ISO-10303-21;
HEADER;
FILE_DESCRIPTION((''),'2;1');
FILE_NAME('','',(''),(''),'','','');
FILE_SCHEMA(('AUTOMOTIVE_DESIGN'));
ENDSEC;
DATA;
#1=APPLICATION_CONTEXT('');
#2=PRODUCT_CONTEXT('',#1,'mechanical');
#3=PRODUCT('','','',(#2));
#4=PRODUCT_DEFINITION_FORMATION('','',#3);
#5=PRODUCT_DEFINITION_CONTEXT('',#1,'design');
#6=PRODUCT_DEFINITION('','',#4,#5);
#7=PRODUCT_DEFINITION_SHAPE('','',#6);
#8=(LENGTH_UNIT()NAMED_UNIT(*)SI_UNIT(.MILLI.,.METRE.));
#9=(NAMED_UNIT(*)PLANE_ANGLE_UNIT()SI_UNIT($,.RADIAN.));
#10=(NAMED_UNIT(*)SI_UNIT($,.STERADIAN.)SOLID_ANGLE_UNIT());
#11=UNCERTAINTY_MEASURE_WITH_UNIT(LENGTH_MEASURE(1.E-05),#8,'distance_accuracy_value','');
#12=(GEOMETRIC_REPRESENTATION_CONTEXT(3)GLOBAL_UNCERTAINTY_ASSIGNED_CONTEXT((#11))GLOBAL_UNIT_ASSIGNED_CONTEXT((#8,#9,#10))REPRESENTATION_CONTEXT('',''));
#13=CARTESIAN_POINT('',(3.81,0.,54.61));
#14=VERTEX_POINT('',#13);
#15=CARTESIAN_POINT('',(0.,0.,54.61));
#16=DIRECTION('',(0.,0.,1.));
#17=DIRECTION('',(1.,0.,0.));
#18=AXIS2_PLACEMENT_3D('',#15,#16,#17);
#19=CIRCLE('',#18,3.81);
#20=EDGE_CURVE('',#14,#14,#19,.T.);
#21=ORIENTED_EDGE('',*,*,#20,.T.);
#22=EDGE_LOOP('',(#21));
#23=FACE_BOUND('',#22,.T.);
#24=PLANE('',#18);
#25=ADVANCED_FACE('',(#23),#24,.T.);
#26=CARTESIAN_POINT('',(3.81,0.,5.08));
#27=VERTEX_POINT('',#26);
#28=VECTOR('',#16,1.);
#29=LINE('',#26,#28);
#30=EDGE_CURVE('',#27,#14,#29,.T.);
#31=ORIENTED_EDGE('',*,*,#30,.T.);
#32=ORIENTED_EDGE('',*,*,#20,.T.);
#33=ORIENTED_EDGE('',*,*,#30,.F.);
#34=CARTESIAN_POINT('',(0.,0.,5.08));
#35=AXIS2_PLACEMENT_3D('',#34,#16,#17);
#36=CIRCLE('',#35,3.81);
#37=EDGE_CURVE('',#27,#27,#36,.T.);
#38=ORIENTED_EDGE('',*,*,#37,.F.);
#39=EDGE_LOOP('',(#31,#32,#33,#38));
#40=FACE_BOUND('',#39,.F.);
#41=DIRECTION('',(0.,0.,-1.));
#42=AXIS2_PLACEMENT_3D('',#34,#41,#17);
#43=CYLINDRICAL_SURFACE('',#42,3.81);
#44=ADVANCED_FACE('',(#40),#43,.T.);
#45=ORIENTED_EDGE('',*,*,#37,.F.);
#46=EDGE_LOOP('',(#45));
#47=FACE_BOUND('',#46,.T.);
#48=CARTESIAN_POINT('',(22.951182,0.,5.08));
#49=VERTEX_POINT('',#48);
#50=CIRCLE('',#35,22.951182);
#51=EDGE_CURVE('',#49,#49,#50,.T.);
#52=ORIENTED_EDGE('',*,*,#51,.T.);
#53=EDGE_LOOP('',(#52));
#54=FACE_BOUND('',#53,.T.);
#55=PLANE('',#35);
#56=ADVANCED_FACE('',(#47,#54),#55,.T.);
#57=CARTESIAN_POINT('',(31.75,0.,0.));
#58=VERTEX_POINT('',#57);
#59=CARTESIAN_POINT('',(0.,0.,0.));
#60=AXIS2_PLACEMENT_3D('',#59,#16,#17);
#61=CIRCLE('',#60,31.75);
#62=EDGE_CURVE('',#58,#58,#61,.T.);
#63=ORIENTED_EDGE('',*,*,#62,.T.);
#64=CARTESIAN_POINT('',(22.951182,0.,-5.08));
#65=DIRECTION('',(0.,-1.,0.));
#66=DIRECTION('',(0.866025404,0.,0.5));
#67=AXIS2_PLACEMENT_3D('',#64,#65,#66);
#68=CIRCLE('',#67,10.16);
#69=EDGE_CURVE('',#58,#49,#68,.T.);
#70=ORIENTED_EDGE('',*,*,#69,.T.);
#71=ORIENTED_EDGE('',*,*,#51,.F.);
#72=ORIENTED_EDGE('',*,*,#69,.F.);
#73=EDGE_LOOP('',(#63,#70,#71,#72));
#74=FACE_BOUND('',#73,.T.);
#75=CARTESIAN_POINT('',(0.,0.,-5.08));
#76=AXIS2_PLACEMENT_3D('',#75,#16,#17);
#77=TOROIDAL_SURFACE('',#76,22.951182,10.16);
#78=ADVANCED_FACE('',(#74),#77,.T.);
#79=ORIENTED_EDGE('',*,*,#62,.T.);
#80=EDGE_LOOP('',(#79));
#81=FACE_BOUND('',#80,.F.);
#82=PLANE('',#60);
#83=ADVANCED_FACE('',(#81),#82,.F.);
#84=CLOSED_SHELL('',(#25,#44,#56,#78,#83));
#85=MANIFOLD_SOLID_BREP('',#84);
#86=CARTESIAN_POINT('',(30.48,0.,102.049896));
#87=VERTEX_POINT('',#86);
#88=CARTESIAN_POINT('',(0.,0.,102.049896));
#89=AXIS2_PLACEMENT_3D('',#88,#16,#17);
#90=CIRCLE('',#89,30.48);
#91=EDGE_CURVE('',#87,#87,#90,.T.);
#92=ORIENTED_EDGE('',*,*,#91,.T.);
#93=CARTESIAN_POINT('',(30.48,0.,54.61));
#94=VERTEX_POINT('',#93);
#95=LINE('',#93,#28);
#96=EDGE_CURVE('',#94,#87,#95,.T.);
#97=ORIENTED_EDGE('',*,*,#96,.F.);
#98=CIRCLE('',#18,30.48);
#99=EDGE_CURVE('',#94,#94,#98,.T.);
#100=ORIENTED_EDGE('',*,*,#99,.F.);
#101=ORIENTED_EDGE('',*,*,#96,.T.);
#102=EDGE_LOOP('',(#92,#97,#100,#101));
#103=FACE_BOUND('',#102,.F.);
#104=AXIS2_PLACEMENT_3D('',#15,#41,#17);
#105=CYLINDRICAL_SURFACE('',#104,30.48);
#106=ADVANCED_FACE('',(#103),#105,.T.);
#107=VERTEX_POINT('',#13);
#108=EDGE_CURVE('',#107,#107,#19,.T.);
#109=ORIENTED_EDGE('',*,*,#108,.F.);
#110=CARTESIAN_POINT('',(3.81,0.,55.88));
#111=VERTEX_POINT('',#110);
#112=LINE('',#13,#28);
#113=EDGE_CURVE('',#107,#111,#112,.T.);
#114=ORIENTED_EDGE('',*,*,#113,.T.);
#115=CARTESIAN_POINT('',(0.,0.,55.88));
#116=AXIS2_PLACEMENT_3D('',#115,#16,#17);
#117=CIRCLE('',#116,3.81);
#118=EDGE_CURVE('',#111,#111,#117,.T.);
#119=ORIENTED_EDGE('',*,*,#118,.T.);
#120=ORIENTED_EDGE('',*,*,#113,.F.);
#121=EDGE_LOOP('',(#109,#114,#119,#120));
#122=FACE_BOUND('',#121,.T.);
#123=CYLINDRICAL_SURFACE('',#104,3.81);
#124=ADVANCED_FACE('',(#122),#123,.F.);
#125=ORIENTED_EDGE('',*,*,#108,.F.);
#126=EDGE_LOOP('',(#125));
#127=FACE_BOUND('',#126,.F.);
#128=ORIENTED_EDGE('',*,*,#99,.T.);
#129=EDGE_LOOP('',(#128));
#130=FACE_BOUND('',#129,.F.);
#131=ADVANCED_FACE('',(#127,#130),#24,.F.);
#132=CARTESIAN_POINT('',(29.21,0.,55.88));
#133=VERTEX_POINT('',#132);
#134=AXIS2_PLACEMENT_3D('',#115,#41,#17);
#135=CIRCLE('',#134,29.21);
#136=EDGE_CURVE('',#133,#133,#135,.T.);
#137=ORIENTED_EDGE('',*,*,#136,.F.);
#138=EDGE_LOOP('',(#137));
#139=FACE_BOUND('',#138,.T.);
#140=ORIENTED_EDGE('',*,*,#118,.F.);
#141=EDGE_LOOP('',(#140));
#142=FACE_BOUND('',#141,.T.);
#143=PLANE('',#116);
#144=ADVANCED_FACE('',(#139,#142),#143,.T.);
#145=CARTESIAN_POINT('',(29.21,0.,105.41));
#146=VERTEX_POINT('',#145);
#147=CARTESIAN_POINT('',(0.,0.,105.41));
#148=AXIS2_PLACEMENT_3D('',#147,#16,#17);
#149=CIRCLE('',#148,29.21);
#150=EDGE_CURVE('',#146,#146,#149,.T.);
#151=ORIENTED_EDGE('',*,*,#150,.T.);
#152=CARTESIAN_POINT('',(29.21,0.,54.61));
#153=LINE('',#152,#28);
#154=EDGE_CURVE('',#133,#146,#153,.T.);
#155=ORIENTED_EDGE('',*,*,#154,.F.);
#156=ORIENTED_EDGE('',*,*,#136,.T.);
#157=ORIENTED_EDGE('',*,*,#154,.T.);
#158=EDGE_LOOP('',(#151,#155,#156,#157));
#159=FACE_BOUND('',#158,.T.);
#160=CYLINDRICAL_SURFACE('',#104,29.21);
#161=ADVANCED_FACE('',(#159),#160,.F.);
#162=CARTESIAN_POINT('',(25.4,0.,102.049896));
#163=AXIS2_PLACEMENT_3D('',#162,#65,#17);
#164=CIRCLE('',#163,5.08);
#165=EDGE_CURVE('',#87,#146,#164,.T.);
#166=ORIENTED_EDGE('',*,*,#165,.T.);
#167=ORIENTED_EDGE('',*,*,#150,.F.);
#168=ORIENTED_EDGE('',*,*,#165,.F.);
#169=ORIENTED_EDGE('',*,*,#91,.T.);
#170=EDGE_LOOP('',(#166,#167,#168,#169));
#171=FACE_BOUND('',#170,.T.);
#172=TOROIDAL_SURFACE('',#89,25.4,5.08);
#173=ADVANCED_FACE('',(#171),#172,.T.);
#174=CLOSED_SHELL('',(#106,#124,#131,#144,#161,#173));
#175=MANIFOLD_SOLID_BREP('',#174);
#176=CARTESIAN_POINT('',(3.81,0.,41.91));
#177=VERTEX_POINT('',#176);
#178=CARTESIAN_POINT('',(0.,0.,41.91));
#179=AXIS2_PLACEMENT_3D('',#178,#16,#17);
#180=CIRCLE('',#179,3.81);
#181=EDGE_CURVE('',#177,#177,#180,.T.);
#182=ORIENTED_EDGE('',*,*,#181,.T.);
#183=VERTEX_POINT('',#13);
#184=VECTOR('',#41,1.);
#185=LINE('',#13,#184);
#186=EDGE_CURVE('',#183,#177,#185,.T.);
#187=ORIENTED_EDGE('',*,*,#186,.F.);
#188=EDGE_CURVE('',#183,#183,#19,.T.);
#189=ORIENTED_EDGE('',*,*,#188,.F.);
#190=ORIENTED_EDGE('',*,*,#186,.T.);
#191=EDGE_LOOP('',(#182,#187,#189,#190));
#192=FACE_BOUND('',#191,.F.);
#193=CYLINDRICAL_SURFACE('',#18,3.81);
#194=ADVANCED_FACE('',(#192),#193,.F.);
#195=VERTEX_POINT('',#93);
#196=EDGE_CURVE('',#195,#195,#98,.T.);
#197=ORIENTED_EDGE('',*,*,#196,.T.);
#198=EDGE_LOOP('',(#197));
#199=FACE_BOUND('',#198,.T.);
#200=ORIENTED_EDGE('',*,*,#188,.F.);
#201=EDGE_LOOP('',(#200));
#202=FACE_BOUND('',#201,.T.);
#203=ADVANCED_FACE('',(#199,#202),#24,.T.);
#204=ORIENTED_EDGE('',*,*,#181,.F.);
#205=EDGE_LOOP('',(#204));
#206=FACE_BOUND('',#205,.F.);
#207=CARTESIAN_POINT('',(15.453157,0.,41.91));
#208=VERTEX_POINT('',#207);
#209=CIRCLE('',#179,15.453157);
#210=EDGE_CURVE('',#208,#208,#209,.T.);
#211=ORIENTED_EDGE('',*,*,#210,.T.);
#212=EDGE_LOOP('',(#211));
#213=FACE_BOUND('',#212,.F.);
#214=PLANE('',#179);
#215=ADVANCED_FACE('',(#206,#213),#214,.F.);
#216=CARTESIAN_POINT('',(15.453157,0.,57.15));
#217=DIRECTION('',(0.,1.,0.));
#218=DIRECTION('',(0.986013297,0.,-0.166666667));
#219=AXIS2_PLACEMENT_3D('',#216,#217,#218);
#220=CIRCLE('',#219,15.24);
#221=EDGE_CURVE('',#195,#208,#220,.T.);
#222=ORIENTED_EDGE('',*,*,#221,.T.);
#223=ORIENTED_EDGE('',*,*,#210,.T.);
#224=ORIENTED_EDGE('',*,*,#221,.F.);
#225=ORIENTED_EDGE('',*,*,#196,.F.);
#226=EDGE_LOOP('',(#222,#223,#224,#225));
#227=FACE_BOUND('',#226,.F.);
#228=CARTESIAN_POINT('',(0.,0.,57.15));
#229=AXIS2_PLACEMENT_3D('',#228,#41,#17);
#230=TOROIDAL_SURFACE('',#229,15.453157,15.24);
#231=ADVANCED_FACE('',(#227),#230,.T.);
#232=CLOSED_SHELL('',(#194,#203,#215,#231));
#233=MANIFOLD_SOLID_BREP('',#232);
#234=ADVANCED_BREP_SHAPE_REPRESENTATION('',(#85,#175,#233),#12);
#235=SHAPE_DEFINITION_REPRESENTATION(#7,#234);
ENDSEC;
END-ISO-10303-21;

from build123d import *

# Parameters (mm, degrees)
F0_R     = 31.75
F1_DEPTH = 5.08
F3_R     = 3.81
F4_DEPTH = 49.53
F5_R     = 30.48
F5_R_2   = 3.81
F6_DEPTH = 50.8
F7_DEPTH = 12.7
F9_T     = -1.27


# Not quite as in the source:
# - a fillet or chamfer that OpenCascade refuses, or shapes differently, is made with other operations: its cross-section is extruded or revolved along the edge and cut away or added


with BuildPart() as f1:
    # F0 (on Top) → F1 (new body)
    with BuildSketch(Plane.XY):
        Circle(F0_R)
    extrude(amount=F1_DEPTH)

    # F2: fillet of radius 10.16 on 1 edges, made by hand

    # F2_s1 → F2_t2 (revolve, cut)
    with BuildSketch(Plane.XZ):
        with BuildLine():
            ThreePointArc((31.75, 0), (28.0311818975, 3.7188181024), (22.9511818975, 5.08))
            Line((22.9511818975, 5.08), (31.75, 5.08))
            Line((31.75, 5.08), (31.75, 0))
        make_face()
    revolve(axis=Axis((0, 0, 5.08), (0, 0, 1)), mode=Mode.SUBTRACT)

    # F3 (on face) → F4 (join)
    with BuildSketch(Plane.XY.offset(5.08)):
        Circle(F3_R)
    extrude(amount=F4_DEPTH)


with BuildPart() as f6:
    # F5 (on face) → F6 (new body)
    with BuildSketch(Plane.XY.offset(54.61)):
        Circle(F5_R)
        Circle(F5_R_2, mode=Mode.SUBTRACT)
    extrude(amount=F6_DEPTH)


with BuildPart() as f7:
    # F7 (new): a face of the model
    f7_faces = [f6.part.faces().sort_by_distance(p)[0] for p in [
        (-29.6178954124, 0, 54.61),
    ]]
    extrude(f7_faces, amount=F7_DEPTH)

    # F8: fillet of radius 15.24 on 1 edges, made by hand

    # F8_s1 → F8_t2 (revolve, cut)
    with BuildSketch(Plane.XZ):
        with BuildLine():
            ThreePointArc((30.48, 54.61), (25.2905350503, 45.5102577348), (15.4531573509, 41.91))
            Line((15.4531573509, 41.91), (30.48, 41.91))
            Line((30.48, 41.91), (30.48, 54.61))
        make_face()
    revolve(axis=Axis((0, 0, 41.91), (0, 0, 1)), mode=Mode.SUBTRACT)


with BuildPart() as f6_1:
    add(f6.part)

    # F9
    f9_openings = [f6_1.faces().sort_by_distance(p)[0] for p in [
        (-29.617895, 0, 105.41),
        (-3.81, 0, 80.01),
    ]]
    offset(amount=F9_T, openings=f9_openings)

    # F10: fillet of radius 5.08 on 1 edges, made by hand

    # F10_s1 → F10_t2 (revolve, cut)
    with BuildSketch(Plane.XZ):
        with BuildLine():
            ThreePointArc((30.48, 102.0498958349), (30.1519048812, 103.8459470592), (29.21, 105.41))
            Line((29.21, 105.41), (30.48, 105.41))
            Line((30.48, 105.41), (30.48, 102.0498958349))
        make_face()
    revolve(axis=Axis((0, 0, 105.41), (0, 0, 1)), mode=Mode.SUBTRACT)


solid = Compound([f1.part, f7.part, f6_1.part])
